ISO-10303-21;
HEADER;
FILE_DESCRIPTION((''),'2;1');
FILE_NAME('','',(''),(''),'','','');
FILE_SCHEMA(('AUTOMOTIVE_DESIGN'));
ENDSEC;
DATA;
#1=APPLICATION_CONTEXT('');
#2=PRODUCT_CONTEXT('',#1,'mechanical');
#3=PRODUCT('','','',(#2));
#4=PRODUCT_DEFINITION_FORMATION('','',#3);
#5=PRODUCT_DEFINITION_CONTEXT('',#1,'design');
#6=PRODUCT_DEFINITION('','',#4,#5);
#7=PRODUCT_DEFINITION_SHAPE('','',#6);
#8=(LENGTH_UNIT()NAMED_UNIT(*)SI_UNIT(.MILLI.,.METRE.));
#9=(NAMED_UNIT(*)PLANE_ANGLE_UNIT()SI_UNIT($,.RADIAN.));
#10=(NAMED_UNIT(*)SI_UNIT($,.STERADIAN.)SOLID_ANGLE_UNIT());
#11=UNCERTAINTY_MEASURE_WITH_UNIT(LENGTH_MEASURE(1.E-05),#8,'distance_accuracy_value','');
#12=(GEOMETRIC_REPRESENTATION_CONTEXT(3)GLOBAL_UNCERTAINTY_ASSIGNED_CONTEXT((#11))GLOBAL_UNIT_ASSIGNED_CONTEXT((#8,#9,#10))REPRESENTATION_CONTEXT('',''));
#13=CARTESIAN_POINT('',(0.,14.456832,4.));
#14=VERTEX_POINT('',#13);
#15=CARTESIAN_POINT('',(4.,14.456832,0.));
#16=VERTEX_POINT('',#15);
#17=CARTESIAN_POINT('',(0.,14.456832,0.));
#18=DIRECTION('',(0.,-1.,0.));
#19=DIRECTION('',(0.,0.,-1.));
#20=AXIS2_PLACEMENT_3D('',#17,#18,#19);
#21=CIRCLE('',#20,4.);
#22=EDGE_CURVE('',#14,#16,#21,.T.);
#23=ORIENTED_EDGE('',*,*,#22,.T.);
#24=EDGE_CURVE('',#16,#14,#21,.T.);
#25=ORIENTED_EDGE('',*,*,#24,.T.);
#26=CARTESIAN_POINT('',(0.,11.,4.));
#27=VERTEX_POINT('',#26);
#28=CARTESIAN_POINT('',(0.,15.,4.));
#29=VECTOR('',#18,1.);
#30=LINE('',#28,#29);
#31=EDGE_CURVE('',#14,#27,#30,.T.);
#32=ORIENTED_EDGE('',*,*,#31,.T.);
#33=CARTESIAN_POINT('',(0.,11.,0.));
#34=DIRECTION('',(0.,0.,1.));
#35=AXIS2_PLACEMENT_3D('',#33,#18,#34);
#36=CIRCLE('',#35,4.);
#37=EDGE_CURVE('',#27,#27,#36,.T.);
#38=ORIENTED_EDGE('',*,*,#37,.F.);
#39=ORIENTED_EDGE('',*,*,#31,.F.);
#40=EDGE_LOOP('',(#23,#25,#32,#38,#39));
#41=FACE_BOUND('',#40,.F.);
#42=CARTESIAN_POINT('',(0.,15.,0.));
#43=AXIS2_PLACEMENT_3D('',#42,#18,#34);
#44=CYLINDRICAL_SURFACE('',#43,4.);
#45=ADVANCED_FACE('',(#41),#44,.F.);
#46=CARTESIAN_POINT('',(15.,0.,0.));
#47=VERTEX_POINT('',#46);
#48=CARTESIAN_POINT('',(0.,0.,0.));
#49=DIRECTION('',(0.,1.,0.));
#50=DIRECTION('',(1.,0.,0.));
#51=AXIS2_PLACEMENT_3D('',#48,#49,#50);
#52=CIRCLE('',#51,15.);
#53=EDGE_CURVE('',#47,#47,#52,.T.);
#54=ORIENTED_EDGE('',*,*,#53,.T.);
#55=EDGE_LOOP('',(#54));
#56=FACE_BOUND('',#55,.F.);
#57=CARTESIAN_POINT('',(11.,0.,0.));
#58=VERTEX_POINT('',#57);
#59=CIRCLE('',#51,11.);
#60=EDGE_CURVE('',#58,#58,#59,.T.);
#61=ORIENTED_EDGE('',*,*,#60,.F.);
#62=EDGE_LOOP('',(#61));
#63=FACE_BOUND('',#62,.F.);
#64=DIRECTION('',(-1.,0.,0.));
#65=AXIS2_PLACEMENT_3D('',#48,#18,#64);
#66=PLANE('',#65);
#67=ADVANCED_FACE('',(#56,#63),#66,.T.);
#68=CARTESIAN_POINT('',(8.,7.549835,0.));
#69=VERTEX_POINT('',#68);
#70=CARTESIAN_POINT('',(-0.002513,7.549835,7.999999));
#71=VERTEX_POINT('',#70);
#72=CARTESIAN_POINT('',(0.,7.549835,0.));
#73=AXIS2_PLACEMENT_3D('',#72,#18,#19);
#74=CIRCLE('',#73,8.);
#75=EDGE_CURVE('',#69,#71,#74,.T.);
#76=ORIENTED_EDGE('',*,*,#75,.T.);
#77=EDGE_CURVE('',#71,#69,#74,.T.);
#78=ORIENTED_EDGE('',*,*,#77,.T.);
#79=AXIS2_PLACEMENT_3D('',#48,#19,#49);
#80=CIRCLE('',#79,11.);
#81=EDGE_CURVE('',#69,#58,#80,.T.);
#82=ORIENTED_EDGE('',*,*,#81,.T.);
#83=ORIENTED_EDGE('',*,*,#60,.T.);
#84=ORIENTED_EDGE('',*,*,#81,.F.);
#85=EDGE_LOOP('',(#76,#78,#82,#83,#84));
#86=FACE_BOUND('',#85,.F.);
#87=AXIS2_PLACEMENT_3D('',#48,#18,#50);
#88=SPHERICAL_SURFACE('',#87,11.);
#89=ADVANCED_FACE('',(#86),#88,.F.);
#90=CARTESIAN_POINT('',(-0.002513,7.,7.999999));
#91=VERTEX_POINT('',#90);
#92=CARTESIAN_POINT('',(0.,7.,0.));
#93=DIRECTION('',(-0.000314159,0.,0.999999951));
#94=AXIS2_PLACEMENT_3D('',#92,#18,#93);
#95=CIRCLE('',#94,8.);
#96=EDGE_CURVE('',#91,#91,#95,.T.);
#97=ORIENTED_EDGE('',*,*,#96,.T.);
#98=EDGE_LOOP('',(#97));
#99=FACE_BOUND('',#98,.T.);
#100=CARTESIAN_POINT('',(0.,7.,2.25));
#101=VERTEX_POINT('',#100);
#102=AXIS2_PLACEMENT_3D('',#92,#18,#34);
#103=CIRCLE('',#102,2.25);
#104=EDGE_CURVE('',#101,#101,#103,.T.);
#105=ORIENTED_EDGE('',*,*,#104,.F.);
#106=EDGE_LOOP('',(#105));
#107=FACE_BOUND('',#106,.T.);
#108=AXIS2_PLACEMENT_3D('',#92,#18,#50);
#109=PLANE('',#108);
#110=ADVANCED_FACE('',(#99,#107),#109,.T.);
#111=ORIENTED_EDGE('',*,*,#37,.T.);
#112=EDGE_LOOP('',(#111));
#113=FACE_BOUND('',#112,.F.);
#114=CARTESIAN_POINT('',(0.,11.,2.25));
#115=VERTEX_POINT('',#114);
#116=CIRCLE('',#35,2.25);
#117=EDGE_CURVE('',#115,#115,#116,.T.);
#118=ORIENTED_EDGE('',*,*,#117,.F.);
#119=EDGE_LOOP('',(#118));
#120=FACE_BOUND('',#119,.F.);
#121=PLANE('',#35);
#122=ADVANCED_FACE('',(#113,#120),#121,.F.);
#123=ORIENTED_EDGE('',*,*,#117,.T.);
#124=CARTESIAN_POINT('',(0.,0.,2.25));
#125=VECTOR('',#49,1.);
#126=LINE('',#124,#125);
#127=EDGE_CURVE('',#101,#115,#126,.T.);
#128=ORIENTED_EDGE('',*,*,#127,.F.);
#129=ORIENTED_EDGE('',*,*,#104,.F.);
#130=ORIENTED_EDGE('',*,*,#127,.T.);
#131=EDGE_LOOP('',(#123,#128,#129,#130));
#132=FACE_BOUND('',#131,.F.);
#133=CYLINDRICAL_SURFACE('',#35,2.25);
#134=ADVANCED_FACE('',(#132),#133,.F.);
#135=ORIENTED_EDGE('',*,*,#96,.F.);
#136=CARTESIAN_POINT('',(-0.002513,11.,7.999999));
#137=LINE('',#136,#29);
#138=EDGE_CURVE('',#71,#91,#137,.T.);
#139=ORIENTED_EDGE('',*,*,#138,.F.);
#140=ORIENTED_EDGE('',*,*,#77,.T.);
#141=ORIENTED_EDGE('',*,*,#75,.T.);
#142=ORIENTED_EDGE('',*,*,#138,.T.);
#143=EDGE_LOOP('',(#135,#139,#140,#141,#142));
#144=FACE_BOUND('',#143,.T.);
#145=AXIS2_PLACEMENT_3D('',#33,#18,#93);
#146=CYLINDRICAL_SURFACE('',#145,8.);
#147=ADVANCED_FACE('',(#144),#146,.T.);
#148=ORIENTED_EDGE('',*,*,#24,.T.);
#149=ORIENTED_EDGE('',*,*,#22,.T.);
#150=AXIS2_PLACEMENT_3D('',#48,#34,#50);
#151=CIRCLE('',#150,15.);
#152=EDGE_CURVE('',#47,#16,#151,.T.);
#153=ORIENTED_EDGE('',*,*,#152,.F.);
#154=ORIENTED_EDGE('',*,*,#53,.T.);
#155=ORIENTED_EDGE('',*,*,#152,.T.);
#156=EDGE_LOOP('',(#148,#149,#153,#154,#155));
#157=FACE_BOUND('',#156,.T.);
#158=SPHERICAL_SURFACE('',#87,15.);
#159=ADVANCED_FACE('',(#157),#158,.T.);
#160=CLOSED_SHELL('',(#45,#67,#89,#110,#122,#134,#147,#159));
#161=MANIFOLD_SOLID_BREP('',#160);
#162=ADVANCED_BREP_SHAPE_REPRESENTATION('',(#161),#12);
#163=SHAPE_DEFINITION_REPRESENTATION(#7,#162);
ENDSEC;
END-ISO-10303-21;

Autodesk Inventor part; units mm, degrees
ref_plane "YZ Plane" through (0, 0, 0) normal (1, 0, 0) x (0, 1, 0)
ref_plane "XY Plane" through (0, 0, 0) normal (0, 0, 1) x (1, 0, 0)
sketch "Sketch1" plane through (0, 0, 0) normal (0, 0, 1) x (1, 0, 0)
  line L0 (0, 0) -> (0, 15)
  line L1 (0, 0) -> (15, 0)
  arc A0 (15, 0) -> (0, 15) centre (0, 0) ccw
  line L2 (0, -3.621321) -> (0, 21.727922)
  dimension "d2" = 15
sketch "Sketch1 outline for Revolution1" plane through (0, 0, 0) normal (0, 0, 1) x (1, 0, 0)
  line L0 (0, 0) -> (0, 15)
  arc A0 (0, 15) -> (15, 0) centre (0, 0) cw
  line L1 (15, 0) -> (0, 0)
revolve "Revolution1" add sketch "Sketch1 outline for Revolution1" angle 360 about axis through (0, -10, 0) along (0, 1, 0)
ref_plane "Work Plane1" through (0, 15, 0) normal (0, 1, 0) x (-1, 0, 0)
sketch "Sketch2" plane through (0, 15, 0) normal (0, 1, 0) x (-1, 0, 0)
  point P0 (0, 0)
  point P1 (0, 0)
hole "Hole1" at (0, 15, 0) direction (0, -1, 0) diameter 4.5 end through all counterbore diameter 8 counterbore depth 4 clearance for "Socket Head Cap Screw" size "M4" standard "Ansi Metric M Profile"
shell "Shell1" thickness 4 removed faces 1 at (10.599241, 0, 1.286981)
sketch "Sketch3" plane through (0, 0, 0) normal (0, -1, 0) x (1, 0, 0)
  circle A0 centre (0, 0) radius 6.25 projected
  circle A1 centre (0, 0) radius 2.25 projected
sketch "Sketch3 outline for Extrusion1" plane through (0, 0, 0) normal (0, -1, 0) x (1, 0, 0)
  circle A0 centre (0, 0) radius 6.25
  circle A1 centre (0, 0) radius 2.25
extrude "Extrusion1" cut sketch "Sketch3 outline for Extrusion1" against normal blind 7
properties part number "Ball_Upper Half" material "Nylon 6/6"
